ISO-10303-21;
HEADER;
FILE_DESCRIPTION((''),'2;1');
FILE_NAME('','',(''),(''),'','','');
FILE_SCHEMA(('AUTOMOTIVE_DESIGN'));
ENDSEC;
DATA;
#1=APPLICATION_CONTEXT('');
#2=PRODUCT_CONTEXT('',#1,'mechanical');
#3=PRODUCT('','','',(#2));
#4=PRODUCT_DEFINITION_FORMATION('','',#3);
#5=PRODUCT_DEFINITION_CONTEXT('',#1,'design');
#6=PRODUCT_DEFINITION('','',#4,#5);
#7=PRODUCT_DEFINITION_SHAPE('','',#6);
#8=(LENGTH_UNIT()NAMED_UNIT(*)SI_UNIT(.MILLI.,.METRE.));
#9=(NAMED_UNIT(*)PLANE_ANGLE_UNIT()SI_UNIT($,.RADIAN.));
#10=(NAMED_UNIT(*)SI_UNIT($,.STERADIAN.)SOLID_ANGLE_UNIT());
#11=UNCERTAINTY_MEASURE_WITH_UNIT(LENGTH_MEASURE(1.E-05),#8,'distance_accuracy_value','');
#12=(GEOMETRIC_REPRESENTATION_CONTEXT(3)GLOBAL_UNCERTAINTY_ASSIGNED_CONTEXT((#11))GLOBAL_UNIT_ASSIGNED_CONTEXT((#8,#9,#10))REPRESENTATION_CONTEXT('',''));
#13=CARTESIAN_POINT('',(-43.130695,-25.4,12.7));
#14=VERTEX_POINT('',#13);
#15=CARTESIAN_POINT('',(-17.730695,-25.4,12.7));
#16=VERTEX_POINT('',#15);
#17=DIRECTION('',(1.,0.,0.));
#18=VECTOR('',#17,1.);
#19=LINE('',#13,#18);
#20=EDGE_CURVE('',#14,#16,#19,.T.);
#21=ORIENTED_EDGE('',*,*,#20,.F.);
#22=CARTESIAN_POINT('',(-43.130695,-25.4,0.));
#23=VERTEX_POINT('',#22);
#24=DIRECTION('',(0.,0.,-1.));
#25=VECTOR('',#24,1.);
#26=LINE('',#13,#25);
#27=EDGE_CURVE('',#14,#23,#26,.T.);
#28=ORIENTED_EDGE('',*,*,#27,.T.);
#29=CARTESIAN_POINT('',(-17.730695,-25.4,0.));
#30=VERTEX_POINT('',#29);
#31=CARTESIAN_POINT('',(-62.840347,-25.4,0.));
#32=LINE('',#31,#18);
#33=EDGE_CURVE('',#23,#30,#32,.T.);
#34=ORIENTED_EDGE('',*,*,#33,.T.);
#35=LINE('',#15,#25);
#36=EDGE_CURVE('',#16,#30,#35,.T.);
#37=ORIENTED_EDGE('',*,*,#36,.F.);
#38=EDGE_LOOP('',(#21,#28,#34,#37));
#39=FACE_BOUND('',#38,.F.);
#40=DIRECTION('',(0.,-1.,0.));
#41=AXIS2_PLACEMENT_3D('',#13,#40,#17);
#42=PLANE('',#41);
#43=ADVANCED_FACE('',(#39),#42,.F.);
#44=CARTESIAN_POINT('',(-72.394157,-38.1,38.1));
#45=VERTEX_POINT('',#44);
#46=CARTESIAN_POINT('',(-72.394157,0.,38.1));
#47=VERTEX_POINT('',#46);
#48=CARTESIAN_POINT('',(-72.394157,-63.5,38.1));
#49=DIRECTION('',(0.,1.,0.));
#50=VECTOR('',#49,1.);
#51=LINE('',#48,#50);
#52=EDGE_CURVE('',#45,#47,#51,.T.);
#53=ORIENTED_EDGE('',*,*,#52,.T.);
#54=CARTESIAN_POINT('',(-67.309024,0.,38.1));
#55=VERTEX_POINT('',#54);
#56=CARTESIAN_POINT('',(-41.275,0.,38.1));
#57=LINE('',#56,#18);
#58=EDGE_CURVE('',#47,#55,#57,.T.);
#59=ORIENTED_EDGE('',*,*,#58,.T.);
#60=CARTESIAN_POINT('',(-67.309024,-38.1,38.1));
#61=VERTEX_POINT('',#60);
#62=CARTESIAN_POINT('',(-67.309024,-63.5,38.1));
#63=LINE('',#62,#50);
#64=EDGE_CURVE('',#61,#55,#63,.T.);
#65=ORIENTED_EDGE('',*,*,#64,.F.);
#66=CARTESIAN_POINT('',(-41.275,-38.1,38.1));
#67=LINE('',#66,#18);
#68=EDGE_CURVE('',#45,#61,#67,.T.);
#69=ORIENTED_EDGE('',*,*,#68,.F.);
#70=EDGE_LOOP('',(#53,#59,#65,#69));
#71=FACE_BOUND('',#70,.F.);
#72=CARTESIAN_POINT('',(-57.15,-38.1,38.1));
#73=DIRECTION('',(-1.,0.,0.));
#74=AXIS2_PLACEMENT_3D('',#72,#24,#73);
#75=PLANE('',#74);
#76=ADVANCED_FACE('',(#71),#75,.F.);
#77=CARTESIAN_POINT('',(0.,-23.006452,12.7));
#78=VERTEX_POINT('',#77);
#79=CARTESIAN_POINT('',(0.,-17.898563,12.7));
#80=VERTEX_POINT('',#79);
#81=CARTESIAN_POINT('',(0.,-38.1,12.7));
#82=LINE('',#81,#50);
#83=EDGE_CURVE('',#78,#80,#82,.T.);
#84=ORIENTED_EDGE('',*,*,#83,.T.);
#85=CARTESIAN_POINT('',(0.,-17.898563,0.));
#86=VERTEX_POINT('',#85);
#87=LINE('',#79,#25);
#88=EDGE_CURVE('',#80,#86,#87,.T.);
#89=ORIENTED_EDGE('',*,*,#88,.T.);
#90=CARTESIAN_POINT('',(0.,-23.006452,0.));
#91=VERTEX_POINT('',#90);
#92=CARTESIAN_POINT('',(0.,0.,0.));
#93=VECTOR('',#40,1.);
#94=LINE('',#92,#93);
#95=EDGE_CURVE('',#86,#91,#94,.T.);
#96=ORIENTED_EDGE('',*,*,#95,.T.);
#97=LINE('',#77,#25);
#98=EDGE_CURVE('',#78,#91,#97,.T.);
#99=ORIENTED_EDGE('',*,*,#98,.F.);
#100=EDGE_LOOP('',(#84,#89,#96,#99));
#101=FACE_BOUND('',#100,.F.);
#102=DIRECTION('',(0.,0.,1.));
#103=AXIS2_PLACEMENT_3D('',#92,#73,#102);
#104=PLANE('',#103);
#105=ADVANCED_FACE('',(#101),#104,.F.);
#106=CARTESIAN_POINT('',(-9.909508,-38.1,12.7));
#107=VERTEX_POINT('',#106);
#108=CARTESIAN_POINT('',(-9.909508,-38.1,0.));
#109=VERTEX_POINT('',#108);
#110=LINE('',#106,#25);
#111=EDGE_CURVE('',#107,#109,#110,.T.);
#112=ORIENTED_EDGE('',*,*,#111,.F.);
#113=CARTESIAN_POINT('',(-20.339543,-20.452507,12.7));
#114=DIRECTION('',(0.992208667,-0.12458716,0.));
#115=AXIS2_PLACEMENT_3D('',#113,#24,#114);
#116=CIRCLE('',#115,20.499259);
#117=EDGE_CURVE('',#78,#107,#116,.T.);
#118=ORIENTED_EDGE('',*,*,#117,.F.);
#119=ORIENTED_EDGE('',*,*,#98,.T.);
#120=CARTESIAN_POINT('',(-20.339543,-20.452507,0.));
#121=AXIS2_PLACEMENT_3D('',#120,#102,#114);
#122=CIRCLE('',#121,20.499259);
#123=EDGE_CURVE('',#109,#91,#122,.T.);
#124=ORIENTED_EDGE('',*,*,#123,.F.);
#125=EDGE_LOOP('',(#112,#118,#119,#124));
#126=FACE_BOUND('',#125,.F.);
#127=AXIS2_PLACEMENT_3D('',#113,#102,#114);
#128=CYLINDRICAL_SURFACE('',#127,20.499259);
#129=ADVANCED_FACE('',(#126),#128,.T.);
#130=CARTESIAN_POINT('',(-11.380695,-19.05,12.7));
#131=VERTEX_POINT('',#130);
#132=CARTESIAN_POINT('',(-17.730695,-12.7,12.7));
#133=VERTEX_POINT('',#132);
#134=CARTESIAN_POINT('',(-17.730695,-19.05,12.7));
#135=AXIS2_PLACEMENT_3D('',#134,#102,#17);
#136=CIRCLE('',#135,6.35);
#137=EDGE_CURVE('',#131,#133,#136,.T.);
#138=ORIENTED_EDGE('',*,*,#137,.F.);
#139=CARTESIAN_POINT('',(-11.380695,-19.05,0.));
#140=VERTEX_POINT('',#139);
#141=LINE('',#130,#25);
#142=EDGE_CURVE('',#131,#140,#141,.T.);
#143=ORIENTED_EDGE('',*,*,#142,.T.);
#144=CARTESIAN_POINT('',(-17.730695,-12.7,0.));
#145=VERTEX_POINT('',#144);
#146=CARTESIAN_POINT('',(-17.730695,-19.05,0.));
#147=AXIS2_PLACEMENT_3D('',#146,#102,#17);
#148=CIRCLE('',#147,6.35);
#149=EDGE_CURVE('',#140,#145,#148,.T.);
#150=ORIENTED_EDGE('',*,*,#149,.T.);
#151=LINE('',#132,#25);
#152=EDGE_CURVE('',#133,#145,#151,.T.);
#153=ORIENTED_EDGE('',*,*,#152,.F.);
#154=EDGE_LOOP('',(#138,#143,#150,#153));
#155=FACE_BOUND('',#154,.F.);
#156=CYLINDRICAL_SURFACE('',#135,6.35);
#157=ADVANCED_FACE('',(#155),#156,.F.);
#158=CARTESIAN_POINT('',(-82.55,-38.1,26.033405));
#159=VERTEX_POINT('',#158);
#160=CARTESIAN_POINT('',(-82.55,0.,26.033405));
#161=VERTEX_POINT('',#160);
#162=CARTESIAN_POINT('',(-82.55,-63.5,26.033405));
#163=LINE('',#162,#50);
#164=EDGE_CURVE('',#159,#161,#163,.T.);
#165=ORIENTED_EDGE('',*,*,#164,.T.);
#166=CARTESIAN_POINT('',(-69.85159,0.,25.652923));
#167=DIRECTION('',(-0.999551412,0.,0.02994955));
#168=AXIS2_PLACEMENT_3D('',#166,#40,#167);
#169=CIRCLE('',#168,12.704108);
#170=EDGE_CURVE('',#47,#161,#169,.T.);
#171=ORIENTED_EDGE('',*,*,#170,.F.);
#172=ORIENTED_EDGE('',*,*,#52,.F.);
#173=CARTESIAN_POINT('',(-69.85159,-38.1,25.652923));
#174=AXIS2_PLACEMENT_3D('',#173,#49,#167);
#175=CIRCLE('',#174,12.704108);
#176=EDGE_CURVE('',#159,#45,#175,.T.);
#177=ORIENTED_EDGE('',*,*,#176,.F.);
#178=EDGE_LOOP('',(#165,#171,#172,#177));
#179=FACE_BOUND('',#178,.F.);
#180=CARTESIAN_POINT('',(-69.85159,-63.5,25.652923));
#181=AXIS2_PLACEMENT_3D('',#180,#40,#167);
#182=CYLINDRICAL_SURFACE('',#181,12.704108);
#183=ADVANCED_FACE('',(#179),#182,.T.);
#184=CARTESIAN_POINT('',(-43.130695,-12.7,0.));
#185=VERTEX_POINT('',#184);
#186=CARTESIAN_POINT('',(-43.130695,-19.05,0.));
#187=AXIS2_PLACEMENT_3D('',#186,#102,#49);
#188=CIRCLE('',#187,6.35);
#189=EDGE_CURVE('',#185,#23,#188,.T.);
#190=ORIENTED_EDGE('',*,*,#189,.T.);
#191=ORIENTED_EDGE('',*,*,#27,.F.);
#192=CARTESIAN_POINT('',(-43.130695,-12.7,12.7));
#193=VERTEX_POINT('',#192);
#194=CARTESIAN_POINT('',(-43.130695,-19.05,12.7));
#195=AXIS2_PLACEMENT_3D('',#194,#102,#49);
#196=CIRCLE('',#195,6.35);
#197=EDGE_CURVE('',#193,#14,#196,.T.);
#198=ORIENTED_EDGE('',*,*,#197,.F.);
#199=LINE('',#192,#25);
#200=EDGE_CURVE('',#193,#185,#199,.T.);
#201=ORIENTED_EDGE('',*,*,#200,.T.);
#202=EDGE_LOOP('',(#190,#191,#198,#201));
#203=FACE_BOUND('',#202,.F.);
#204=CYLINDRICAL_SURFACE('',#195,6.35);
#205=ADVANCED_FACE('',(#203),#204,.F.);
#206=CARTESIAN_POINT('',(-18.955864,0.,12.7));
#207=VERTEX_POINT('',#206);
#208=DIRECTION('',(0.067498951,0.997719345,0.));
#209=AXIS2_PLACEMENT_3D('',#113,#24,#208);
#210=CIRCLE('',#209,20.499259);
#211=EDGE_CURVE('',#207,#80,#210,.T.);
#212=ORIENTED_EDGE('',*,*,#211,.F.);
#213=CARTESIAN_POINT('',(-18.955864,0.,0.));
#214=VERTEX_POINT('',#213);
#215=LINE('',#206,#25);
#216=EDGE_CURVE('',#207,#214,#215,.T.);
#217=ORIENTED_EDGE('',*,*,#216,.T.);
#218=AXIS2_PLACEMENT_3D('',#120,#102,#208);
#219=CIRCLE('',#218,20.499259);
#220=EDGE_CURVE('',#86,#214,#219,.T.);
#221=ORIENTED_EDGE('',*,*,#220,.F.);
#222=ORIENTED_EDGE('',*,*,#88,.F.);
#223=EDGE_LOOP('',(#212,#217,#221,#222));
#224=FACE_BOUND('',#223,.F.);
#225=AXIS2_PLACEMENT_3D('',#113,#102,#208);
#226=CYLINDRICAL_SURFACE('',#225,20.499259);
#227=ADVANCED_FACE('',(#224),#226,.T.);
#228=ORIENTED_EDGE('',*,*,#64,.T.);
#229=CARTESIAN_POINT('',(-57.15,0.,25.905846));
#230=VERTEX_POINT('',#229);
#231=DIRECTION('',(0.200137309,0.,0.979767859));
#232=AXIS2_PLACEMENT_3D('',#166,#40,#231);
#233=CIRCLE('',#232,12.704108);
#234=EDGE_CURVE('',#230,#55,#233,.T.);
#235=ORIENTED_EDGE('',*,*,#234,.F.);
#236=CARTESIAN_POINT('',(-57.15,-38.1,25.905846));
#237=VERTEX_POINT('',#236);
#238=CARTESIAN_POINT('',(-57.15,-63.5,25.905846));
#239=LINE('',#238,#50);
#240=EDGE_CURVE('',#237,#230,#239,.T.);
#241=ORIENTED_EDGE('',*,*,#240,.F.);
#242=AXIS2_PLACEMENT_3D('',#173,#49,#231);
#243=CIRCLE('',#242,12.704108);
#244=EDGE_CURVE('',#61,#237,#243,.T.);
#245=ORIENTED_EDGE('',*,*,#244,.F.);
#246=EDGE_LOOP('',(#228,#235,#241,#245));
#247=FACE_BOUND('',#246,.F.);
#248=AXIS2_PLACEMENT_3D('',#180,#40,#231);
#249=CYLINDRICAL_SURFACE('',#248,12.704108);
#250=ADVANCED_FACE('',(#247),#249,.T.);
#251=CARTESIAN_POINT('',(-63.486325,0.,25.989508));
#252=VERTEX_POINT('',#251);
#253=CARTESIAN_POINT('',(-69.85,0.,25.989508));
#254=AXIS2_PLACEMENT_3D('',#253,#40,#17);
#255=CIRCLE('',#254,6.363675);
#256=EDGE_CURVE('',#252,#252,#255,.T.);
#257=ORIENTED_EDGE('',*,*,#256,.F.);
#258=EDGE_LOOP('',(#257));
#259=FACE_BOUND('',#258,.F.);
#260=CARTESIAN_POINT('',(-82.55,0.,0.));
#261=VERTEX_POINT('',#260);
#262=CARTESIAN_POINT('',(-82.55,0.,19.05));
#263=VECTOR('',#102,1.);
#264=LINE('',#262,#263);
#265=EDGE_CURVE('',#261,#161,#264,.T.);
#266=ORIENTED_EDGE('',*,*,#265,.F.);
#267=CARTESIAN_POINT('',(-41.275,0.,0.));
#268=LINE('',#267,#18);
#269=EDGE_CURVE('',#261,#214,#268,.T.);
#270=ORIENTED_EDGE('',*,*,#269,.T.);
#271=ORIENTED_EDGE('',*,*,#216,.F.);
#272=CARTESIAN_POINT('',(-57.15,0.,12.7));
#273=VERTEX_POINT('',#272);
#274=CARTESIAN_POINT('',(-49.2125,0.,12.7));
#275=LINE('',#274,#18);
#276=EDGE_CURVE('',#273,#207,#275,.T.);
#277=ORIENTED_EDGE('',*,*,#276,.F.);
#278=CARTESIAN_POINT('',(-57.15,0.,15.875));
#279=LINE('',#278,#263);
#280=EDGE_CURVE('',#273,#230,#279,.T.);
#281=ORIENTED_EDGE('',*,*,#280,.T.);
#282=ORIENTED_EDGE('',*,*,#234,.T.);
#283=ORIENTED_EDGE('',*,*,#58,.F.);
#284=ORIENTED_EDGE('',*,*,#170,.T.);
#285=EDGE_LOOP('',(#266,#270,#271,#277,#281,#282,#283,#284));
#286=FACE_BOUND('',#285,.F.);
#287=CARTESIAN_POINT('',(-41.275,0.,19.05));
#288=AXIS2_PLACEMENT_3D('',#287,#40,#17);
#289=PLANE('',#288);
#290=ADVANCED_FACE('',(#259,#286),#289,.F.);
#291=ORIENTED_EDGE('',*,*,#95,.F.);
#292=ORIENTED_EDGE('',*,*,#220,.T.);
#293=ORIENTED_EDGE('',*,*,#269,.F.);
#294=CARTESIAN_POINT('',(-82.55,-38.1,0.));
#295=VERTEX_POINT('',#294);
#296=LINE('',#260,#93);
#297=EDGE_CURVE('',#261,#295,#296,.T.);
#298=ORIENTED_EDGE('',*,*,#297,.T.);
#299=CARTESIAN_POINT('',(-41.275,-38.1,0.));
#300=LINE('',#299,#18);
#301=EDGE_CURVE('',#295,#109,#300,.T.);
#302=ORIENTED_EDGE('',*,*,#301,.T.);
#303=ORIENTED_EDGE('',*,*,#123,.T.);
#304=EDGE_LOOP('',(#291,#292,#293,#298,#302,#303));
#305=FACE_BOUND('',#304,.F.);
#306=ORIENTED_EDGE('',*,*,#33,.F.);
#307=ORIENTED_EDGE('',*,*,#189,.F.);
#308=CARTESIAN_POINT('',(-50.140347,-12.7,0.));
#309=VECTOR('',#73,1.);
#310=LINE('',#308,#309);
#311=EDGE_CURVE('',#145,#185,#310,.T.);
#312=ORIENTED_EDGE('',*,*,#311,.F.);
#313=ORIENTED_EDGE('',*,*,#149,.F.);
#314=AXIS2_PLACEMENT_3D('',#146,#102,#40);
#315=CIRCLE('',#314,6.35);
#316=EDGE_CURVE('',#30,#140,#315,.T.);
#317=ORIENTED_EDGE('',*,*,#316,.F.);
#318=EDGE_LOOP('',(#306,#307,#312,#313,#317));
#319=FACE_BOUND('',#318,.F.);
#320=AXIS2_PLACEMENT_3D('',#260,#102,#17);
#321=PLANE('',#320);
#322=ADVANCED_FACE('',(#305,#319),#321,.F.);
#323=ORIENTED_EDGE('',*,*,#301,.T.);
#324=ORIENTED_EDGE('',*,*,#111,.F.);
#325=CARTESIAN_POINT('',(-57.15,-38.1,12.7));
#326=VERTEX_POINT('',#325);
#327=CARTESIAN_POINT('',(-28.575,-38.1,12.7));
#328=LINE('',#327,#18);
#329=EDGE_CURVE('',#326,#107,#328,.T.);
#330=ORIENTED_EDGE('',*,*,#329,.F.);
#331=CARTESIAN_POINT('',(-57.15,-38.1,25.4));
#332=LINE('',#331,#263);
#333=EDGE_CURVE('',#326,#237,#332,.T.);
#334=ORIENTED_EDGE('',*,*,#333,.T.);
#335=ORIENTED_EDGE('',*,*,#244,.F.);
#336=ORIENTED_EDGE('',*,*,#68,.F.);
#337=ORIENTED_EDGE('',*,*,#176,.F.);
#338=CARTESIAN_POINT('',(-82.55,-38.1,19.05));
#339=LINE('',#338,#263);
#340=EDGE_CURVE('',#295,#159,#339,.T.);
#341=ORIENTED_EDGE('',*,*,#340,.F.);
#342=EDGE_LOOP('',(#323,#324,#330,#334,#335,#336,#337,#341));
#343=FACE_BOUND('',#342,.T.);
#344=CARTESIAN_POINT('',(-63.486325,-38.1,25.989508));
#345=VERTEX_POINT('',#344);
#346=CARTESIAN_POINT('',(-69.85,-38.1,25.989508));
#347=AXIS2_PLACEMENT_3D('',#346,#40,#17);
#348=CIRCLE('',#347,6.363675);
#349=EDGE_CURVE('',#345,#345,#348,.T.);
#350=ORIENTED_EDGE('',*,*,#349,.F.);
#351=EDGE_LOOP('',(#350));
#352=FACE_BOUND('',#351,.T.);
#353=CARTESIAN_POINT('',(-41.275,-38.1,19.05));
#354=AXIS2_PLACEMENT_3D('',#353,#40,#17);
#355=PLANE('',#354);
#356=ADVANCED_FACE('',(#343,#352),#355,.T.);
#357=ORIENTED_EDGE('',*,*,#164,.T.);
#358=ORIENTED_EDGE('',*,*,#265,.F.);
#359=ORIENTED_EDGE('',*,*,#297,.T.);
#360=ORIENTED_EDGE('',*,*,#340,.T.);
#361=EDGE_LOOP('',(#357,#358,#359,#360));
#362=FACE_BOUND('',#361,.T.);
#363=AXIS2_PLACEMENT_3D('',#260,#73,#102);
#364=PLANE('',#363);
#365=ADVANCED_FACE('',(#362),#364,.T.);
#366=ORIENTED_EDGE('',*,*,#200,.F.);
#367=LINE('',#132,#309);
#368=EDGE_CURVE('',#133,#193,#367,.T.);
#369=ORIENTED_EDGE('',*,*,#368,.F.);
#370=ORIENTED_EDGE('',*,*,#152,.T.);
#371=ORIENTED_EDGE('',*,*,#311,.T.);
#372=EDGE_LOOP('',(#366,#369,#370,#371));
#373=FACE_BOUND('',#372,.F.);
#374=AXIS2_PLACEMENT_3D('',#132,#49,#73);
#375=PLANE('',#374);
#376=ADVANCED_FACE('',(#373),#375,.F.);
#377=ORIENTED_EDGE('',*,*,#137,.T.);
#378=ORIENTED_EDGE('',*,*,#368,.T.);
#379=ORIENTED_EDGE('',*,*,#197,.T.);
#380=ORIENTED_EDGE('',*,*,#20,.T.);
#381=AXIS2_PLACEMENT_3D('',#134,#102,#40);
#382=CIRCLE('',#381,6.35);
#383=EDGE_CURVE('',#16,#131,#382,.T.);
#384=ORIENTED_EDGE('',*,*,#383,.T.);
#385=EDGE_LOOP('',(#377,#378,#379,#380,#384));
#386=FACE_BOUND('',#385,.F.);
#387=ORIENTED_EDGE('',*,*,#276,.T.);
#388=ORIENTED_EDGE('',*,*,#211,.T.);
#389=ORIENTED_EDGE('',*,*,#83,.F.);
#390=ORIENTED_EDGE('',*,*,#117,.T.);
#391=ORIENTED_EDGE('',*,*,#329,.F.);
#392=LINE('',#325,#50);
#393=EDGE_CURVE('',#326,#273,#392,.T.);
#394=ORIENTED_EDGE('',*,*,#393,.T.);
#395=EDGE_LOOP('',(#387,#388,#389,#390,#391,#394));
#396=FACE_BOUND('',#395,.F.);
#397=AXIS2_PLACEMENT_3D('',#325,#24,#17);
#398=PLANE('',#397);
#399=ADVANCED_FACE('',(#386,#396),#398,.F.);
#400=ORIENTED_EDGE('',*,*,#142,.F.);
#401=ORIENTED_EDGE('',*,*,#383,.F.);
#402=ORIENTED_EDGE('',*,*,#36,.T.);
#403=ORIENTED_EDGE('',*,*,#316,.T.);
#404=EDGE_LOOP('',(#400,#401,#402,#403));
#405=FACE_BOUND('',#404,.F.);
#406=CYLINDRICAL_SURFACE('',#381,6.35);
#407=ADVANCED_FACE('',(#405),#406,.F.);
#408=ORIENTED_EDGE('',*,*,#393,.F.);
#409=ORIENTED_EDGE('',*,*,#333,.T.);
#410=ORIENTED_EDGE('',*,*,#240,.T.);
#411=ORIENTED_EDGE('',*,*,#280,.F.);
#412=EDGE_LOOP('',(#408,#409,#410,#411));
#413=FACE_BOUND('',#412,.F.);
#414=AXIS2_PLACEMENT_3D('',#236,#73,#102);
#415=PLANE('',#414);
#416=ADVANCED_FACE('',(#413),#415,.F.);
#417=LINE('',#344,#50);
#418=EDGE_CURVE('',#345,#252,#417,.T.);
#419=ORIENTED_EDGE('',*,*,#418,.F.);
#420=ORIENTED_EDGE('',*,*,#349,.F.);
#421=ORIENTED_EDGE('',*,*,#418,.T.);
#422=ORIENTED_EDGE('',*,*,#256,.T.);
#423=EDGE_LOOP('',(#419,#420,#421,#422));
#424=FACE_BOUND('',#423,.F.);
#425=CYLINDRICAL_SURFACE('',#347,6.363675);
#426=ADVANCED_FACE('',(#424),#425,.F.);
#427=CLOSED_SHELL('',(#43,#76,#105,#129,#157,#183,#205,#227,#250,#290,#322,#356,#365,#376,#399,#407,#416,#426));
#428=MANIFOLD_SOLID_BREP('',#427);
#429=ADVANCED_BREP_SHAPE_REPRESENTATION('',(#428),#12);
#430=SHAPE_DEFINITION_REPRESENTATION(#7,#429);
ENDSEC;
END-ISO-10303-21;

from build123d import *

# Parameters (mm, degrees)
F0_W      = 82.55
F0_H      = 38.1
F1_DEPTH  = 38.1
F2_W      = 57.15
F2_H      = 25.4
F3_DEPTH  = 38.101
F4_R      = 6.3636745149
F5_DEPTH  = 38.101
F7_DEPTH  = 25.4
F9_DEPTH  = 25.4
F10_DEPTH = 63.501
F12_DEPTH = 25.4


with BuildPart() as f1:
    # F0 (on Front) → F1 (new body)
    with BuildSketch(Plane.XZ):
        with Locations((-41.275, 19.05)):
            Rectangle(F0_W, F0_H)
    extrude(amount=F1_DEPTH)

    # F2 (on face) → F3 (cut, through all)
    with BuildSketch(Plane.XZ.offset(38.1)):
        with Locations((-28.575, 25.4)):
            Rectangle(F2_W, F2_H)
    extrude(amount=-F3_DEPTH, mode=Mode.SUBTRACT)

    # F4 (on face) → F5 (cut, through all)
    with BuildSketch(Plane.XZ.offset(38.1)):
        with Locations((-69.85, 25.9895079914)):
            Circle(F4_R)
    extrude(amount=-F5_DEPTH, mode=Mode.SUBTRACT)

    # F6 (on face) → F7 (cut)
    with BuildSketch(Plane.XY.offset(12.7)):
        with BuildLine():
            ThreePointArc((-43.1306947993, -12.7), (-38.6405667387, -14.5598719395), (-36.7806947993, -19.05))
            ThreePointArc((-36.7806947993, -19.05), (-38.6405667387, -23.5401280605), (-43.1306947993, -25.4))
            Line((-43.1306947993, -25.4), (-17.7306947993, -25.4))
            ThreePointArc((-17.7306947993, -25.4), (-24.0806947993, -19.05), (-17.7306947993, -12.7))
            Line((-17.7306947993, -12.7), (-43.1306947993, -12.7))
        make_face()
        with BuildLine():
            ThreePointArc((-43.1306947993, -25.4), (-38.6405667387, -23.5401280605), (-36.7806947993, -19.05))
            ThreePointArc((-36.7806947993, -19.05), (-38.6405667387, -14.5598719395), (-43.1306947993, -12.7))
            ThreePointArc((-43.1306947993, -12.7), (-49.4806947993, -19.05), (-43.1306947993, -25.4))
        make_face()
        with BuildLine():
            ThreePointArc((-11.3806947993, -19.05), (-13.2405667387, -14.5598719395), (-17.7306947993, -12.7))
            ThreePointArc((-17.7306947993, -12.7), (-24.0806947993, -19.05), (-17.7306947993, -25.4))
            ThreePointArc((-17.7306947993, -25.4), (-13.2405667387, -23.5401280605), (-11.3806947993, -19.05))
        make_face()
    extrude(amount=-F7_DEPTH, mode=Mode.SUBTRACT)

    # F8 (on face) → F9 (join)
    with BuildSketch(Plane.XZ.offset(38.1)):
        with BuildLine():
            ThreePointArc((-67.3090244137, 38.1), (-60.0909334069, 33.7845859546), (-57.15, 25.9058457722))
            Line((-57.15, 25.9058457722), (-57.15, 38.1))
            Line((-57.15, 38.1), (-67.3090244137, 38.1))
        make_face()
        with BuildLine():
            ThreePointArc((-82.55, 26.0334052145), (-79.5712875843, 33.8335010618), (-72.3941565633, 38.1))
            Line((-72.3941565633, 38.1), (-82.55, 38.1))
            Line((-82.55, 38.1), (-82.55, 26.0334052145))
        make_face()
    extrude(amount=F9_DEPTH)

    # F10 (cut, through all): faces of the model
    f10_faces = [f1.faces().sort_by_distance(p)[0] for p in [
        (-59.7492259595, -63.5, 35.2812720031),
        (-79.9507979007, -63.5, 35.2852151474),
    ]]
    extrude(f10_faces, amount=-F10_DEPTH, mode=Mode.SUBTRACT)

    # F11 (on face) → F12 (cut)
    with BuildSketch(Plane.XY.offset(12.7)):
        with BuildLine():
            ThreePointArc((-18.9558640122, 0), (-6.26601343, -5.5476288842), (0, -17.8985628462))
            Line((0, -17.8985628462), (0, 0))
            Line((0, 0), (-18.9558640122, 0))
        make_face()
        with BuildLine():
            ThreePointArc((0, -23.0064517831), (-3.2034542821, -31.7030229504), (-9.9095078185, -38.1))
            Line((-9.9095078185, -38.1), (0, -38.1))
            Line((0, -38.1), (0, -23.0064517831))
        make_face()
    extrude(amount=-F12_DEPTH, mode=Mode.SUBTRACT)


solid = f1.part
